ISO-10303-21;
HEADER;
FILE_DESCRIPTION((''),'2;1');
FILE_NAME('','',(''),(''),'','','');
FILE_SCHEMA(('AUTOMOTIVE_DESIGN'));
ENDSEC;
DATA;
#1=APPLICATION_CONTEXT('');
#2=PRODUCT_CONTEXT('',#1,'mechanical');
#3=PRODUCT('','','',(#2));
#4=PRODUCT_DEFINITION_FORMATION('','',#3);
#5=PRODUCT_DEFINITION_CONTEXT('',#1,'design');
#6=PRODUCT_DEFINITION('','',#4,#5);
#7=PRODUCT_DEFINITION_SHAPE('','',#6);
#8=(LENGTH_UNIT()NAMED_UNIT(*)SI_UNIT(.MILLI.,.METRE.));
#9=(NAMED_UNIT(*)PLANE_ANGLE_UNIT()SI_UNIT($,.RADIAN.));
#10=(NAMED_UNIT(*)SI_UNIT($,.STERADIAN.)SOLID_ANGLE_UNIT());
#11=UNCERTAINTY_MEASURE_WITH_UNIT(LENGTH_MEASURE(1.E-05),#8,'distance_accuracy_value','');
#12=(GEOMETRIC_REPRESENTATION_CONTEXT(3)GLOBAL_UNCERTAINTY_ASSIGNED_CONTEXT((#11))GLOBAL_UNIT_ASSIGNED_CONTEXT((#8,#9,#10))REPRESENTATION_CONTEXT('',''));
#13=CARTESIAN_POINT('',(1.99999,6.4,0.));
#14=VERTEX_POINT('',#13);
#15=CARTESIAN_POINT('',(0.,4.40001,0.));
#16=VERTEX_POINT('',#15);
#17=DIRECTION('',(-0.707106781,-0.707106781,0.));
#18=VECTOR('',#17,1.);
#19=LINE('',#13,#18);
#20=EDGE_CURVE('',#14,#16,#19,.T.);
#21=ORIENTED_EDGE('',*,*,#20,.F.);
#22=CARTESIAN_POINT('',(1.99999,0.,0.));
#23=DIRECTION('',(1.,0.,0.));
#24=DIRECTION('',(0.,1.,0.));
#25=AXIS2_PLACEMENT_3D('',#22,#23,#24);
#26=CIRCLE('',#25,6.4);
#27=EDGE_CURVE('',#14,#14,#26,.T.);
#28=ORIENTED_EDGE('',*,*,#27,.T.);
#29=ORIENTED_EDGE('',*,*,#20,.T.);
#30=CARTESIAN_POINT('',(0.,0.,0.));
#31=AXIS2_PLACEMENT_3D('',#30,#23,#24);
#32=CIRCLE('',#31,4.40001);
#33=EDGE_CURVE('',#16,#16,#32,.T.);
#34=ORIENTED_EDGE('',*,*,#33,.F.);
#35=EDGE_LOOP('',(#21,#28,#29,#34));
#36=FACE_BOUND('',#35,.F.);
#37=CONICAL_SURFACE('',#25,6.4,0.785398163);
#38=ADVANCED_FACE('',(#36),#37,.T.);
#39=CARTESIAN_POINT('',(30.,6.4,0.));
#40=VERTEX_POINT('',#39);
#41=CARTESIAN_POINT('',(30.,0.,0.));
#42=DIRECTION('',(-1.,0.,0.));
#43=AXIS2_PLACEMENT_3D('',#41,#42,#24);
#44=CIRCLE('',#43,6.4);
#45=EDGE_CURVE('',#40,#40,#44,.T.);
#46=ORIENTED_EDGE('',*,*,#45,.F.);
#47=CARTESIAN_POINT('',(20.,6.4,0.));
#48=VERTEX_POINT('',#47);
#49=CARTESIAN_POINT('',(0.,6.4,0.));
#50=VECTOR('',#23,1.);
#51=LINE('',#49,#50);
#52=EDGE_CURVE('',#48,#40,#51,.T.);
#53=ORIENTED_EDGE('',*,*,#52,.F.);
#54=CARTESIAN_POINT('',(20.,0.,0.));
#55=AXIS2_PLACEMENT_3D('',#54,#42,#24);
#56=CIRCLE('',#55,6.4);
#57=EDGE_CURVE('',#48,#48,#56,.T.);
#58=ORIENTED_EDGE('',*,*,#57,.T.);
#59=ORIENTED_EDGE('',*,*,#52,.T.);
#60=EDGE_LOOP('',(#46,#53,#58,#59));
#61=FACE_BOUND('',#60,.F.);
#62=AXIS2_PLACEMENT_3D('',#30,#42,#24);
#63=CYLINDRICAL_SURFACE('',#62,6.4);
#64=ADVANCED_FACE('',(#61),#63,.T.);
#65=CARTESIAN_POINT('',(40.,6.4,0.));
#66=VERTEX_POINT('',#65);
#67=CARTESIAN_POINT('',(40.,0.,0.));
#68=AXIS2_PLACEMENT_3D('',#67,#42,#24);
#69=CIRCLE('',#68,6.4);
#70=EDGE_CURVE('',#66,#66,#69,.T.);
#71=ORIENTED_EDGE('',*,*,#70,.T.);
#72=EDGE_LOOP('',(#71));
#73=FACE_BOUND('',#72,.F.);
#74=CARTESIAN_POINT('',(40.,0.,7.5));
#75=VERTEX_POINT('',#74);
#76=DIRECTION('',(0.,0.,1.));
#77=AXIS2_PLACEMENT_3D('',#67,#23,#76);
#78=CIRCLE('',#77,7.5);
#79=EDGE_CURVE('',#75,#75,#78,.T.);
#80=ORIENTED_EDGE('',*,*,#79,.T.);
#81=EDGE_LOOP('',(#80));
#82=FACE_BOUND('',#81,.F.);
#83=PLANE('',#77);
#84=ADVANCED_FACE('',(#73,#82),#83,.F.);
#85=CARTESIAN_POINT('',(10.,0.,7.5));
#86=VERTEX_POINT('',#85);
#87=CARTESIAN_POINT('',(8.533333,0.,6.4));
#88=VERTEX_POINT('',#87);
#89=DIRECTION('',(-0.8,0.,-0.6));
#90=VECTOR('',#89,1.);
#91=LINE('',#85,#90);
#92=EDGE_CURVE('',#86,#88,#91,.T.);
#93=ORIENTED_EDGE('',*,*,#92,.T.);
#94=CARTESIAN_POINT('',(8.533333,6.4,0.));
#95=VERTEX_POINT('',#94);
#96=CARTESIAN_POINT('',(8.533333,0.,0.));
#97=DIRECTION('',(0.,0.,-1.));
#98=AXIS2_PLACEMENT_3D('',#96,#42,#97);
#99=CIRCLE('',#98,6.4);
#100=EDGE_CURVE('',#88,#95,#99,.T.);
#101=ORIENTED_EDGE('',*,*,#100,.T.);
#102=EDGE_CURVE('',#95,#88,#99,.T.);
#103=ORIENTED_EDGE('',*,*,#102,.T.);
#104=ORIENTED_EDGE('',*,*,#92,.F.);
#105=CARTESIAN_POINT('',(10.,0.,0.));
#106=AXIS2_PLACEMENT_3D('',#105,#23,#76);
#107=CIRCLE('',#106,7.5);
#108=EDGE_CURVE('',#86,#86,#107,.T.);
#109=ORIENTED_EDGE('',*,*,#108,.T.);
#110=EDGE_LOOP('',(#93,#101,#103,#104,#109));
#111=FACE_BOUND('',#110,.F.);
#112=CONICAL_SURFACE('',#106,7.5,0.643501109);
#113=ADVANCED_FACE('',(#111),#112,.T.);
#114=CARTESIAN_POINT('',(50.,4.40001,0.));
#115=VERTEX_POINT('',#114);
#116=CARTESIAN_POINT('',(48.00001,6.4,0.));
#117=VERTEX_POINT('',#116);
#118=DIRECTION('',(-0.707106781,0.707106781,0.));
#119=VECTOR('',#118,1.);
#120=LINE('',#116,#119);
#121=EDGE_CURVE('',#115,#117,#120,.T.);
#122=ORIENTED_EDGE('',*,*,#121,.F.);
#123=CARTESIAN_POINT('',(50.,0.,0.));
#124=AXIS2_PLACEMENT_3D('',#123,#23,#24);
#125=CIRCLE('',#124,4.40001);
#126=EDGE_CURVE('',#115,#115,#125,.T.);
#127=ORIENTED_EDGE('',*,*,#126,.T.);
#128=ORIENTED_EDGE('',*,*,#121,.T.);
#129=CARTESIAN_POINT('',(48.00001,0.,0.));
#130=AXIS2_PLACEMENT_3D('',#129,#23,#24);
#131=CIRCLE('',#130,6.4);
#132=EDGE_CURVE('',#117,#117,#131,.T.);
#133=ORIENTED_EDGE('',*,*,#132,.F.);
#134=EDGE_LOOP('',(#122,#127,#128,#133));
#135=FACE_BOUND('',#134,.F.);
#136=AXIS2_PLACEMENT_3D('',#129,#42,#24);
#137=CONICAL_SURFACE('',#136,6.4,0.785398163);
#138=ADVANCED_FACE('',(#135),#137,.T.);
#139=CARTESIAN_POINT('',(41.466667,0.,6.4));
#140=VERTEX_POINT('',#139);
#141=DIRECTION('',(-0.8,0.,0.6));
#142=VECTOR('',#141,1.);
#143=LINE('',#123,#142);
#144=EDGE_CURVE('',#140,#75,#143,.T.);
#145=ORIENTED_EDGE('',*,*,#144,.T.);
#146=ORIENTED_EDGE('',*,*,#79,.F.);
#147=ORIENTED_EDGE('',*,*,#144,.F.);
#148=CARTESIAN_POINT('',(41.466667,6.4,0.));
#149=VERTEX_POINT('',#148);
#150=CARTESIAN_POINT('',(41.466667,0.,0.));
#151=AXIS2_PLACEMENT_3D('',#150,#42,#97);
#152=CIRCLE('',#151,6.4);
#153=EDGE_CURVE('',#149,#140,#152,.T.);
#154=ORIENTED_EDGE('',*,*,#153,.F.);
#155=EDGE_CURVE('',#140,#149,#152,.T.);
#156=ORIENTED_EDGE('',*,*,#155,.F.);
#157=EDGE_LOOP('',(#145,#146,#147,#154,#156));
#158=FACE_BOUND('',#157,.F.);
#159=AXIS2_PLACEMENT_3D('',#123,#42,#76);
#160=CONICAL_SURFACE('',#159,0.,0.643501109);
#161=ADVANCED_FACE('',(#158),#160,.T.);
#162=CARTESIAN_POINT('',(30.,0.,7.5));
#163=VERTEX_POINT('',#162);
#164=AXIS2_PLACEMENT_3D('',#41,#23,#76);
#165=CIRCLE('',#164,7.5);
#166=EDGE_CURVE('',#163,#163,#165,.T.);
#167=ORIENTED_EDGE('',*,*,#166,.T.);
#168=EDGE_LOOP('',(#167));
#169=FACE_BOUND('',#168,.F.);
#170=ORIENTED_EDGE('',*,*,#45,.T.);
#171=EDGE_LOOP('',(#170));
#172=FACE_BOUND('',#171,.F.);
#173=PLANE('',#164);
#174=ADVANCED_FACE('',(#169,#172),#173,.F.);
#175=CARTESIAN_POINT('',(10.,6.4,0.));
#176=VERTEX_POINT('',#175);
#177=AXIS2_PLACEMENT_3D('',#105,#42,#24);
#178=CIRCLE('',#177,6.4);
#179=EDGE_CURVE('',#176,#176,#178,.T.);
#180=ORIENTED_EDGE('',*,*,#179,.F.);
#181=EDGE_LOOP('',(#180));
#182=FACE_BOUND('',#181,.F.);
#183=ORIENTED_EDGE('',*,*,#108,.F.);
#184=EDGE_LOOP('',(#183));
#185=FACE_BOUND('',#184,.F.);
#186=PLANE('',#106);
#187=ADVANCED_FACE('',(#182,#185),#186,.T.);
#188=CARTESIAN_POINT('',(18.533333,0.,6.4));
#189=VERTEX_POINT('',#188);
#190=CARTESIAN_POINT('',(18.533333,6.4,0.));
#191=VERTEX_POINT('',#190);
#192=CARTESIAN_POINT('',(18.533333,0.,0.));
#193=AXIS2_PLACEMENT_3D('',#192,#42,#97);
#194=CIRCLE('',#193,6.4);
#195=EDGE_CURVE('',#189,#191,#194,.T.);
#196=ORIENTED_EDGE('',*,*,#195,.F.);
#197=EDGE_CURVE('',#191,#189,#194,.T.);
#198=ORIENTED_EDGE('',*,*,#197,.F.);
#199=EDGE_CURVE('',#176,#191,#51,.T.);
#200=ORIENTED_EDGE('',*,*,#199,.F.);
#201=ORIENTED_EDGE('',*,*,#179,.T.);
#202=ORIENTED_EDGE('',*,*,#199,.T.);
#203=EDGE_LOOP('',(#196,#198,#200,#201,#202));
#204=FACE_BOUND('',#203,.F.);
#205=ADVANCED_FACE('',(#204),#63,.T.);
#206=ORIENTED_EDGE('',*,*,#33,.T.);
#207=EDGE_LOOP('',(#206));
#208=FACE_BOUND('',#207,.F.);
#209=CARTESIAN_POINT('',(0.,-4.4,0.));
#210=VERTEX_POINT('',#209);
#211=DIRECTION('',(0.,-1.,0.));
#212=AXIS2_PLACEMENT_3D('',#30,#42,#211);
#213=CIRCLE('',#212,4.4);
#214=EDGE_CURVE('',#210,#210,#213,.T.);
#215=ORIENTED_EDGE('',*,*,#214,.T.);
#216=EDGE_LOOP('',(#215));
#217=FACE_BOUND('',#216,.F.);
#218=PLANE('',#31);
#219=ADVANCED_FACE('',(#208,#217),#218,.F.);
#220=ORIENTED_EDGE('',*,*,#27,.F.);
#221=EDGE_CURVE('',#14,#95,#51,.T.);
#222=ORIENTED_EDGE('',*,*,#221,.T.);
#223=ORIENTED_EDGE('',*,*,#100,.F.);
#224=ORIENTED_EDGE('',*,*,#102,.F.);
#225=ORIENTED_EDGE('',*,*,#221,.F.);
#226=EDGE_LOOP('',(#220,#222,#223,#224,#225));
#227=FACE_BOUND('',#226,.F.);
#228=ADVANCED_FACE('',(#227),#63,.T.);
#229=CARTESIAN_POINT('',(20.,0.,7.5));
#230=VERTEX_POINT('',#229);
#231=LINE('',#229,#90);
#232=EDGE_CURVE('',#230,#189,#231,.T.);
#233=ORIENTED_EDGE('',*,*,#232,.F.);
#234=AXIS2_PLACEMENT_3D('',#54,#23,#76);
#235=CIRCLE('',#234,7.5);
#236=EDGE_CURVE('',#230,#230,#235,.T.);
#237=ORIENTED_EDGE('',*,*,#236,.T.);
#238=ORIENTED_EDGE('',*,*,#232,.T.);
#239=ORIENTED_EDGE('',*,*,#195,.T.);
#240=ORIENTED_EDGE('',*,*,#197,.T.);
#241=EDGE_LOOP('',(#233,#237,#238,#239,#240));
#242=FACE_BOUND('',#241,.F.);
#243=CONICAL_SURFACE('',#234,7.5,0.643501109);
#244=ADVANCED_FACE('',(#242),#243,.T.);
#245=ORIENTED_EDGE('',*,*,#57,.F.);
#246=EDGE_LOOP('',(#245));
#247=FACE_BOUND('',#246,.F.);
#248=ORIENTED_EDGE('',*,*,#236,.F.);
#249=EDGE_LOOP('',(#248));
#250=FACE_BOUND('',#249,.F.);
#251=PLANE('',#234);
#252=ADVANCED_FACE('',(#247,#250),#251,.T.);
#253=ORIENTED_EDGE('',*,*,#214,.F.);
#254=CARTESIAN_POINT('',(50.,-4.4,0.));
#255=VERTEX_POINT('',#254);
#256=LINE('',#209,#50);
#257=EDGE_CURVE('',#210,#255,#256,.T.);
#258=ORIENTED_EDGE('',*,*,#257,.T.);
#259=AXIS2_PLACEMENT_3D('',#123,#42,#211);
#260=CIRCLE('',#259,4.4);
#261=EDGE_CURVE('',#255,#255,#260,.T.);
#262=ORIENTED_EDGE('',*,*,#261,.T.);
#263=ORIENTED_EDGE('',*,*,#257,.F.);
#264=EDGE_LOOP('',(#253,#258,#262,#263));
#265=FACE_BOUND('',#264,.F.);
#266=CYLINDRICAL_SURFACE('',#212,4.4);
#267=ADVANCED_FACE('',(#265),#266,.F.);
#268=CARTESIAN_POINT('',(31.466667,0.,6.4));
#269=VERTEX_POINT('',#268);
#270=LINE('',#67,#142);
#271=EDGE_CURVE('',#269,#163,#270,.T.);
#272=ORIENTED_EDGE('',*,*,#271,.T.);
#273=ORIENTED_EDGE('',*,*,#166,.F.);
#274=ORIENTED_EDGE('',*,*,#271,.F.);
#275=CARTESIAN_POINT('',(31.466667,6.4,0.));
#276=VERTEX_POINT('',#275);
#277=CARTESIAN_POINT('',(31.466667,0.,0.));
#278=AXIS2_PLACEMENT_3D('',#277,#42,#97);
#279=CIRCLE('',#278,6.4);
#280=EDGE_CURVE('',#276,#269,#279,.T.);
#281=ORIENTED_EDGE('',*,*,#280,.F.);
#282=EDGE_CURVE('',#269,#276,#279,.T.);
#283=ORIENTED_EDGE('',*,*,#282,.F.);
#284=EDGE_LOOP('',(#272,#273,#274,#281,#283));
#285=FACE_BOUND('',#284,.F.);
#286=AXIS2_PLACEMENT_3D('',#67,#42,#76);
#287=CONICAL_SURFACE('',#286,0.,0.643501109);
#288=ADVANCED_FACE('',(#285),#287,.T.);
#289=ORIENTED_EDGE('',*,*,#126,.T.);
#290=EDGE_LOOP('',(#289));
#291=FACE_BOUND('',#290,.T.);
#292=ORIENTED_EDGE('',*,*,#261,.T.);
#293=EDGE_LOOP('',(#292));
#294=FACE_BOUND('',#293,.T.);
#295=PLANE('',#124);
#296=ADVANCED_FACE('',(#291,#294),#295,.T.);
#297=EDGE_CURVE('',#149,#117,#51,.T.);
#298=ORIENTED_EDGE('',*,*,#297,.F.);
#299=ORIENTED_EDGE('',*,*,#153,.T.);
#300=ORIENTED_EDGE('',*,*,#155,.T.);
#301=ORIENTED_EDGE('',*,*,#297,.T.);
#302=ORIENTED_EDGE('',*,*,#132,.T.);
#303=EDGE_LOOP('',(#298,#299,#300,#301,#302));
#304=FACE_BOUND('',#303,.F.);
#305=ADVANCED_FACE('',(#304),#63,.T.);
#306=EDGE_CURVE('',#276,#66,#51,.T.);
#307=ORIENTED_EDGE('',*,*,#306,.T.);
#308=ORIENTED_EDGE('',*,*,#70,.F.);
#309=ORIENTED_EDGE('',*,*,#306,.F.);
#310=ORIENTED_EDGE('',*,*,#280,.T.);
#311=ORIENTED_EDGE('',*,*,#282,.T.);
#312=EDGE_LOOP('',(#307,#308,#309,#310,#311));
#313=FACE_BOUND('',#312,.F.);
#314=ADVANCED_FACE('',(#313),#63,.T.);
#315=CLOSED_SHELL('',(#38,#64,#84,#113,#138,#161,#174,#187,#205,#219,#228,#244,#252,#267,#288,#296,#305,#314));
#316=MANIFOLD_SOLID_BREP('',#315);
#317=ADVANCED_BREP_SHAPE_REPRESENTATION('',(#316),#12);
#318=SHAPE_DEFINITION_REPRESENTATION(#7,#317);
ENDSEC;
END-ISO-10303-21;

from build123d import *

# Parameters (mm, degrees)
F0_R     = 6.4
F1_DEPTH = 50
F4_R     = 4.4
F5_DEPTH = 50.001
F6_SIZE  = 1.99999


# Not quite as in the source:
# - a fillet or chamfer is up to 0.001 mm smaller than in the source, because OpenCascade refuses the exact size


with BuildPart() as f1:
    # F0 (on Right) → F1 (new body)
    with BuildSketch(Plane.YZ):
        Circle(F0_R)
    extrude(amount=F1_DEPTH)

    # F2 (on Front) → F3 (revolve)
    with BuildSketch(Plane.XZ):
        Polygon((10, 0), (10, 7.5), (0, 0), align=None)
        Polygon((20, 0), (20, 7.5), (10, 0), align=None)
        Polygon((40, 0), (30, 7.5), (30, 0), align=None)
        Polygon((50, 0), (40, 7.5), (40, 0), align=None)
    revolve(axis=Axis((25, 0, 0), (1, 0, 0)))

    # F4 (on face) → F5 (cut, through all)
    with BuildSketch(Plane(origin=(0, 0, 0), x_dir=(0, -1, 0), z_dir=(-1, 0, 0))):
        Circle(F4_R)
    extrude(amount=-F5_DEPTH, mode=Mode.SUBTRACT)

    # F6 (size 2 in the source; OpenCascade refuses exactly that, so slightly less here)
    f6_edges = [f1.edges().sort_by_distance(p)[0] for p in [
        (50, -6.4, 0),
        (0, -6.4, 0),
    ]]
    chamfer(f6_edges, length=F6_SIZE)


solid = f1.part
